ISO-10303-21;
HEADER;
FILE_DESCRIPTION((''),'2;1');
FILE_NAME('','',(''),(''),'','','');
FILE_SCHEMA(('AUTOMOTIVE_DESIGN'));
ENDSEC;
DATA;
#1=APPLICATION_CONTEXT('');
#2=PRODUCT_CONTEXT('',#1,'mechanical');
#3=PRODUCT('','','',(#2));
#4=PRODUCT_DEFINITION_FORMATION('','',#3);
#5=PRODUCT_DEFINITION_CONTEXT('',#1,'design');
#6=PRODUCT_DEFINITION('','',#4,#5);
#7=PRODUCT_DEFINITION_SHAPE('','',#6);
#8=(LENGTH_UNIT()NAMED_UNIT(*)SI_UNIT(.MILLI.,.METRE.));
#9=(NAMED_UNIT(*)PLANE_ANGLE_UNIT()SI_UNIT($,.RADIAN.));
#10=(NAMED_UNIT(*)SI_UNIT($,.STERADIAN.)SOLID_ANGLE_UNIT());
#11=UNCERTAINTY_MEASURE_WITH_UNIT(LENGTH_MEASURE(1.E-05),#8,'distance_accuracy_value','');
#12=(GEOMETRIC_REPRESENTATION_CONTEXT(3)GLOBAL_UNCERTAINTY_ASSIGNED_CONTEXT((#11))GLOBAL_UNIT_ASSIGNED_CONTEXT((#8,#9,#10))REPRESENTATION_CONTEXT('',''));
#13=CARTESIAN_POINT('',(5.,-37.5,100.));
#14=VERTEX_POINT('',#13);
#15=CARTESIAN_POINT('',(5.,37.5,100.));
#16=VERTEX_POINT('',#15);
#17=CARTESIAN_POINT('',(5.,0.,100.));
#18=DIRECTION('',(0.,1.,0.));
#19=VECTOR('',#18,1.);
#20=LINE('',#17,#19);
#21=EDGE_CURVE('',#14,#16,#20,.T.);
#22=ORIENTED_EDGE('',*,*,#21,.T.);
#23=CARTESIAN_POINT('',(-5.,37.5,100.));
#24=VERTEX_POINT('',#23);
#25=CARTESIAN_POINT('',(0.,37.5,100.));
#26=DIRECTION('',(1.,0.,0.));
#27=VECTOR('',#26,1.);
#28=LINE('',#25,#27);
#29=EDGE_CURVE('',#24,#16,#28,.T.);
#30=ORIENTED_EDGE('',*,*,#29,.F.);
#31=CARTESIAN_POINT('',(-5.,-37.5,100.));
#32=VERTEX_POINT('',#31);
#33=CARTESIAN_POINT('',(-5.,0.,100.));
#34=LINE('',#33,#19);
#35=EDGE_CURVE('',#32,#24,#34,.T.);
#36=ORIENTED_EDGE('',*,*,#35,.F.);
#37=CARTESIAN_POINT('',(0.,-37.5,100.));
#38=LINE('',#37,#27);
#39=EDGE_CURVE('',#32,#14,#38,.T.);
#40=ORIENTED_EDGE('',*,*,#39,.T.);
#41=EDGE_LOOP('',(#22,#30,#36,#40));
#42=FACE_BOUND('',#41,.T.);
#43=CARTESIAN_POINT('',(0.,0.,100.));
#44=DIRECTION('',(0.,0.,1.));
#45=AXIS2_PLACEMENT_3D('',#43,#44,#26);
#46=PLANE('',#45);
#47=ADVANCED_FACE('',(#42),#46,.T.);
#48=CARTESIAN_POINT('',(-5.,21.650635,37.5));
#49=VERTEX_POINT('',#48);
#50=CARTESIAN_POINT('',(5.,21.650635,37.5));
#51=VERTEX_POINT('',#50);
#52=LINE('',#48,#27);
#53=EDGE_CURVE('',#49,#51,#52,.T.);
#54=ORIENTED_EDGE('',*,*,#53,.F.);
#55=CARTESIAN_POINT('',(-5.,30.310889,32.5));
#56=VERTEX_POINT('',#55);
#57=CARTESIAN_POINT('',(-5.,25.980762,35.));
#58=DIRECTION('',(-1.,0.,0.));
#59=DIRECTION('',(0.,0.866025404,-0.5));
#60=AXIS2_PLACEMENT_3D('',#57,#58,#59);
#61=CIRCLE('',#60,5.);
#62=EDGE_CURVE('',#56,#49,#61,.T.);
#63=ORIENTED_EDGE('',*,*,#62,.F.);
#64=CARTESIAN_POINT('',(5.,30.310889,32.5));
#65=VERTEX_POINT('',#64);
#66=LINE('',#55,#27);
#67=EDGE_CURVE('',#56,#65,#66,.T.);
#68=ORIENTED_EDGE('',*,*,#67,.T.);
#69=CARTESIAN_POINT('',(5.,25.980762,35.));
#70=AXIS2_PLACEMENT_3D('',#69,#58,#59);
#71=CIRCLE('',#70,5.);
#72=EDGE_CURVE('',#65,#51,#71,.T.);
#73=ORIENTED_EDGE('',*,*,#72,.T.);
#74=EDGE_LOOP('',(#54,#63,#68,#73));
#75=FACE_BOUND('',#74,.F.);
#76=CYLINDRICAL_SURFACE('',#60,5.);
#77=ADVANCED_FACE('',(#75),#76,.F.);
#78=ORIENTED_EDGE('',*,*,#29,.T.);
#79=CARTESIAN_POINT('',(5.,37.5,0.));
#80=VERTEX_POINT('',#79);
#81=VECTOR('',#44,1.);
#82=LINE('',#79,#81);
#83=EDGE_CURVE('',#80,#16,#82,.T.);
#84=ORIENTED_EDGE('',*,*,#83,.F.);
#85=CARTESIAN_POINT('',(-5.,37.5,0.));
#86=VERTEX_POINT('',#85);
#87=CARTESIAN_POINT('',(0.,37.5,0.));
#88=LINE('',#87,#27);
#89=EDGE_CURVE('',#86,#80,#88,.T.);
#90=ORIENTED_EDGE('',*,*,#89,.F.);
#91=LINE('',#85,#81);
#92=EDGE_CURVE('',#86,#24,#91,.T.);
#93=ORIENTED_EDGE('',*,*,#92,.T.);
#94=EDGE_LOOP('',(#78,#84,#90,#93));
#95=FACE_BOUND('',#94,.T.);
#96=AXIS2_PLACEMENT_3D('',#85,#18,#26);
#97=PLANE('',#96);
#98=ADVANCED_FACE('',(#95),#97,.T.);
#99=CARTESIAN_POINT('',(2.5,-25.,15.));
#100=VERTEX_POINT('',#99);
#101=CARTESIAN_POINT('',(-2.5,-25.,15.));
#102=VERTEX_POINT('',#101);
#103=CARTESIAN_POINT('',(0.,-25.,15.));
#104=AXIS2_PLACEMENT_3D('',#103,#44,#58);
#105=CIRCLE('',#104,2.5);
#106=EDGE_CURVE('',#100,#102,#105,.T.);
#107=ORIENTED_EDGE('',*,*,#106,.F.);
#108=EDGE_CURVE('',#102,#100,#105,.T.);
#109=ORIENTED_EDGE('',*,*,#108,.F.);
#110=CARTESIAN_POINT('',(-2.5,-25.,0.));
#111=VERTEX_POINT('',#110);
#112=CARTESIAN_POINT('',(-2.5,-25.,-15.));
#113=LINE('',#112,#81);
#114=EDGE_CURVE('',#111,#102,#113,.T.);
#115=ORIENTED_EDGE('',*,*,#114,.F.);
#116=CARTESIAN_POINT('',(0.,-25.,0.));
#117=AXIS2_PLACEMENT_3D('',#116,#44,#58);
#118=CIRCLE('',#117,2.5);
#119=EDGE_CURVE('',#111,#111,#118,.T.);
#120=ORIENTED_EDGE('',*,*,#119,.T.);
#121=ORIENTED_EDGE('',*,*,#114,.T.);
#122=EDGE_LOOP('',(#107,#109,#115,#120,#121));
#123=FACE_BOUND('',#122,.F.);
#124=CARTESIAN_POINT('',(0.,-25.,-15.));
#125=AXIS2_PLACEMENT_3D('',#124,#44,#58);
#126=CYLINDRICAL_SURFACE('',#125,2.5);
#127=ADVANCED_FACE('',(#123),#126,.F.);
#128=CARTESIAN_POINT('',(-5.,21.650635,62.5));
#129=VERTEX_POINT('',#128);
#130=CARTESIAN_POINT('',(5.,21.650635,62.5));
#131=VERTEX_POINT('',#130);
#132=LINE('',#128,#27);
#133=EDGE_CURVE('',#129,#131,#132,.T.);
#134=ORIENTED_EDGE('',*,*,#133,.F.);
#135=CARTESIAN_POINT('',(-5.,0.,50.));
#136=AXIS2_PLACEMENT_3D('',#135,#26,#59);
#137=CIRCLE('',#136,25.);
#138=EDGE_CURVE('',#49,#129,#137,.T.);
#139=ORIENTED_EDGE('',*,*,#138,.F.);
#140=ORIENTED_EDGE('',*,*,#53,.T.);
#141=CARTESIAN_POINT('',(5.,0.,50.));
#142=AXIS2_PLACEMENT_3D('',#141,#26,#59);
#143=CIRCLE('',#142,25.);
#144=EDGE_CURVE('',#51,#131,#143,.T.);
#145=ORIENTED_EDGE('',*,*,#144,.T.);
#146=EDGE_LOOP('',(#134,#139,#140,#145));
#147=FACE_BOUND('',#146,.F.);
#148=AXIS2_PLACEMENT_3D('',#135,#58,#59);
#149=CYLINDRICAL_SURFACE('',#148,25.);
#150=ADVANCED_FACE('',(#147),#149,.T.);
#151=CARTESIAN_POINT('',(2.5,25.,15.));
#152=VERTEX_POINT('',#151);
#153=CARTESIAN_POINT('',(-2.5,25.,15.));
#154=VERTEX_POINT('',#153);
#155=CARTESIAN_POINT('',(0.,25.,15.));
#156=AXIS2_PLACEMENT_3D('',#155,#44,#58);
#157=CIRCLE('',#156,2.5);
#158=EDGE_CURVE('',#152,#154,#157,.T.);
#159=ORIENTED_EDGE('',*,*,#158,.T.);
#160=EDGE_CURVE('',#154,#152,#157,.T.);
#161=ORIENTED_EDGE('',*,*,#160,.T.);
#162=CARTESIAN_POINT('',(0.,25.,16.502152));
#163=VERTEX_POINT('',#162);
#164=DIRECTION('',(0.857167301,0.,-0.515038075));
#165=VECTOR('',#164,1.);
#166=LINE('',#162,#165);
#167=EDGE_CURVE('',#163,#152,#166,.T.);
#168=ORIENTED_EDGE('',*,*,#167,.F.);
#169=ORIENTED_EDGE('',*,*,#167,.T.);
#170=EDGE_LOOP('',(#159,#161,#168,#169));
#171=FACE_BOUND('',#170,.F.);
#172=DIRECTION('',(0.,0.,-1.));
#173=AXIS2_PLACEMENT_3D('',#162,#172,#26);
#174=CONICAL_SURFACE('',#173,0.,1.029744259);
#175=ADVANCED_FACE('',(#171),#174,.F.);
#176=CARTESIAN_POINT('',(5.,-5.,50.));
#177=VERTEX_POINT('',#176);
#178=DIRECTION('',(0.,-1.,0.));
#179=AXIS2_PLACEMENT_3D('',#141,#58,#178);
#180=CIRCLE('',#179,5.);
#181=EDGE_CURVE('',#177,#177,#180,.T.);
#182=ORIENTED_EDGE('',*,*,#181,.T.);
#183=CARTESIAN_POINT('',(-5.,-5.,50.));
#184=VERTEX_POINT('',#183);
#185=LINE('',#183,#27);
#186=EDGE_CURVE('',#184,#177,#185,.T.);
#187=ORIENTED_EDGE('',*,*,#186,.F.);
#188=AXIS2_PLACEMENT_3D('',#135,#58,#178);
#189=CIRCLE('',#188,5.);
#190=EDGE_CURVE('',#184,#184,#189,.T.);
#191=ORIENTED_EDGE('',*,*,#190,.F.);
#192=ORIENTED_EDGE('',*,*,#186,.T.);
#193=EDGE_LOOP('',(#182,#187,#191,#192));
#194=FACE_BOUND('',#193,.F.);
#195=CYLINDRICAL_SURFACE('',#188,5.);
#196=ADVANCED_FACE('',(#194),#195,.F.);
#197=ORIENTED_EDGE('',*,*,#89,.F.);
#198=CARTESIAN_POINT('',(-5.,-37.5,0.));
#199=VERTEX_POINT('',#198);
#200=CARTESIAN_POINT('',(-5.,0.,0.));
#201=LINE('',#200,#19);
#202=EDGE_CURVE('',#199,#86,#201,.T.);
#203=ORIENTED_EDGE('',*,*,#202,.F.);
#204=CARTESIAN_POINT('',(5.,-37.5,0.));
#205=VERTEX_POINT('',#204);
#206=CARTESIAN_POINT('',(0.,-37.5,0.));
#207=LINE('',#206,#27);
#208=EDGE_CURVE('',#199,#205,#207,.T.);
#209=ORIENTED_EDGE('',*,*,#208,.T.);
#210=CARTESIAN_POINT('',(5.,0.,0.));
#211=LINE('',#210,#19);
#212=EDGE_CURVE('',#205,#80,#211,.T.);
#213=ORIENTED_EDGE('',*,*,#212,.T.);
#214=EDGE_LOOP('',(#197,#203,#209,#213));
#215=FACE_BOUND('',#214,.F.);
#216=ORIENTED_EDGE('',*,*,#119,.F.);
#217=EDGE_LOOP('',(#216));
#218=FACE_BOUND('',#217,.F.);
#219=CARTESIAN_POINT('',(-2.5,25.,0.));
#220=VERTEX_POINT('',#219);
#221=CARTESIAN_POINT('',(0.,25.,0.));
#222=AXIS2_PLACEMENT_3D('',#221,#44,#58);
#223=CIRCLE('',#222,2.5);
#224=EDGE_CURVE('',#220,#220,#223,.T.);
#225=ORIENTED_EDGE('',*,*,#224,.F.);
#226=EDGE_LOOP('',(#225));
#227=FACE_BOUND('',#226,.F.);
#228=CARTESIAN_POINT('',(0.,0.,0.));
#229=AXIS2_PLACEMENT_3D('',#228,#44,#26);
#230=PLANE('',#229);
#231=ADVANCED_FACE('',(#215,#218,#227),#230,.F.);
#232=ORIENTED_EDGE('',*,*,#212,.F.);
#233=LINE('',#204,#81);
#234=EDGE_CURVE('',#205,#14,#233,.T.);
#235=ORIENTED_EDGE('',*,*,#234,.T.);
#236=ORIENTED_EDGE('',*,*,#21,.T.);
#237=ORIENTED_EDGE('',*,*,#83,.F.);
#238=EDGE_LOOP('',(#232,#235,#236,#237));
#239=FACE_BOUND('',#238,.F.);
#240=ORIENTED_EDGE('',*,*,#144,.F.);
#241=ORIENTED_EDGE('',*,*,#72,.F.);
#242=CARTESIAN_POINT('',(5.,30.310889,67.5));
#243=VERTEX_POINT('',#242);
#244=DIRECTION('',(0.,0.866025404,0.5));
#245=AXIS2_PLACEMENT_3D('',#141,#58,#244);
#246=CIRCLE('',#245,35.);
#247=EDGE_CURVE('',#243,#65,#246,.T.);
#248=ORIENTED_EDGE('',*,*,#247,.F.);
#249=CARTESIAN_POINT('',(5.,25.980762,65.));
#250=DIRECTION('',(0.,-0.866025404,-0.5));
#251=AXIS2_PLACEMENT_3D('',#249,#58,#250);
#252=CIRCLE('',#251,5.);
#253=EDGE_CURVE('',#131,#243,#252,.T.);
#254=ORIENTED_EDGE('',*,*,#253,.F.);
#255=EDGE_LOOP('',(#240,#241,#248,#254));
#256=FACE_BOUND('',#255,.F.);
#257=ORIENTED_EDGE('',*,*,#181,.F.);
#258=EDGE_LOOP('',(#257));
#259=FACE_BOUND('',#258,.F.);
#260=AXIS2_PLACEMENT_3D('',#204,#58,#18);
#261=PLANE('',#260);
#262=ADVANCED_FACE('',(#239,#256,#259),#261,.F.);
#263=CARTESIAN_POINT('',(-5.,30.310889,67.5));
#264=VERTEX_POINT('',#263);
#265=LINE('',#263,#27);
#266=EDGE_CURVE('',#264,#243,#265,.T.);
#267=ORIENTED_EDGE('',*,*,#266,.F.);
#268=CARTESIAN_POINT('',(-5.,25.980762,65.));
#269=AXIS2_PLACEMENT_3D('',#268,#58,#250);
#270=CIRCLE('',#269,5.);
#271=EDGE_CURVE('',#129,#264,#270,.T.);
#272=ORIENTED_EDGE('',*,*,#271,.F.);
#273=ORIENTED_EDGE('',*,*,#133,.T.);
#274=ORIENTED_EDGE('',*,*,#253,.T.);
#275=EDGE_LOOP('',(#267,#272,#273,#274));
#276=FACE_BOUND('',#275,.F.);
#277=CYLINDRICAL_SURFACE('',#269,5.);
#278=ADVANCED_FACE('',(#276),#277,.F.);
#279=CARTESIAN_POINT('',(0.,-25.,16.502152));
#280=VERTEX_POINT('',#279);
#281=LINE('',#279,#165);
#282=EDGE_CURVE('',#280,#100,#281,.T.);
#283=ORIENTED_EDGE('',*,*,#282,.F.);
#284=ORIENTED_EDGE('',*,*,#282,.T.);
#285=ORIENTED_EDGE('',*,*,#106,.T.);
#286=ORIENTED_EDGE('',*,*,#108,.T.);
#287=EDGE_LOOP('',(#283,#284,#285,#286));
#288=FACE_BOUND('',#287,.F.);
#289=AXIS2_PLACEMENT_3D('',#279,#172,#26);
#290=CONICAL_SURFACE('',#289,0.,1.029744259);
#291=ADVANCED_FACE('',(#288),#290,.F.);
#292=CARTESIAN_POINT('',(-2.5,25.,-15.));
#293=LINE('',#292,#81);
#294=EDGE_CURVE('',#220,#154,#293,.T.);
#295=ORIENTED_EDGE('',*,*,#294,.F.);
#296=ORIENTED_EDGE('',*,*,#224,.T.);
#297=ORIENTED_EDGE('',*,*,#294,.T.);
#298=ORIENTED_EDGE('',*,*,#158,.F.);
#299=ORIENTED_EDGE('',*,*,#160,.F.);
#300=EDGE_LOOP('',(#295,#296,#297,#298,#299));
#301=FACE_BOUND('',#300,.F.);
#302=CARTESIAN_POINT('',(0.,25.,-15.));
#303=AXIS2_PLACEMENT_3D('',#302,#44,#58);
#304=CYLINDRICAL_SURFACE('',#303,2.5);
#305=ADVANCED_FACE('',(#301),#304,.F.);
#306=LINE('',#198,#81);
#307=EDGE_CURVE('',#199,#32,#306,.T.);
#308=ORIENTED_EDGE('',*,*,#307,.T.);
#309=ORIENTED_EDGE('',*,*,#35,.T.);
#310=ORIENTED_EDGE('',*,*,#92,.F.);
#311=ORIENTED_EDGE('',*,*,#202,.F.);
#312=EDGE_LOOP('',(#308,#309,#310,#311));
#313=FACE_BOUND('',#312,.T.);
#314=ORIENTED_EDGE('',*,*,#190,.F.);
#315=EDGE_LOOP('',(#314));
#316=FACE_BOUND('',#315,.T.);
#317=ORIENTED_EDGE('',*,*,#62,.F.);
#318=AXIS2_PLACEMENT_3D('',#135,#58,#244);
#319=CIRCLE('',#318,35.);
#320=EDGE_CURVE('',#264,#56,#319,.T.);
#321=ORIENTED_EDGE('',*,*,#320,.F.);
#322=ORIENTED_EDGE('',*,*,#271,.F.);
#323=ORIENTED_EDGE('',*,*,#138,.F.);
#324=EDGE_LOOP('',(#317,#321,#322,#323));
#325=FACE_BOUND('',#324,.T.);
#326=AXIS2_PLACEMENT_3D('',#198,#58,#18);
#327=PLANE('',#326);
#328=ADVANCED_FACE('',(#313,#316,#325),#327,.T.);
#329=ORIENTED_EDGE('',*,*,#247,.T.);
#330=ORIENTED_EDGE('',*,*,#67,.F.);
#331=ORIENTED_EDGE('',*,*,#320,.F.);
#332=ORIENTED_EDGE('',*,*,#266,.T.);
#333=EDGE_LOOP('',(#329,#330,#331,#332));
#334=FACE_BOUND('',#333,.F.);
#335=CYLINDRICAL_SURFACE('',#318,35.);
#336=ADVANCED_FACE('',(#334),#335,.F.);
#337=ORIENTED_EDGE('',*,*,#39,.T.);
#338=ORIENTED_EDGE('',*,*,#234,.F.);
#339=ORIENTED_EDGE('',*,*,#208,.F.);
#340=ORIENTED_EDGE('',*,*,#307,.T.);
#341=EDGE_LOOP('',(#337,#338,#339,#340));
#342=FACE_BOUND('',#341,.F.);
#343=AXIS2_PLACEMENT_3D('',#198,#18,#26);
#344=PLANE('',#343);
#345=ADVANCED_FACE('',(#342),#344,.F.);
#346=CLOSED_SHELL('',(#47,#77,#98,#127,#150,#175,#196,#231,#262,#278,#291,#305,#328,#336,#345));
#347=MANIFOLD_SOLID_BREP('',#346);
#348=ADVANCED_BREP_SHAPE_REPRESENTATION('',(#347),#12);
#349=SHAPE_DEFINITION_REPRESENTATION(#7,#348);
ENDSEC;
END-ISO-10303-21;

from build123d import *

# Parameters (mm, degrees)
F0_W     = 10
F0_H     = 75
F1_DEPTH = 100
F3_D     = 5
F3_DEPTH = 15
F3_TIP   = 1.5021515476
F4_R     = 5
F5_DEPTH = 10
F7_DEPTH = 10


with BuildPart() as f1:
    # F0 (on Top) → F1 (new body)
    with BuildSketch(Plane.XY):
        Rectangle(F0_W, F0_H)
    extrude(amount=F1_DEPTH)

    # F3
    with Locations(Plane(origin=(0, 0, 0), x_dir=(1, 0, 0), z_dir=(0, 0, -1))):
        with Locations((0, 25), (0, -25)):
            Hole(F3_D / 2, depth=F3_DEPTH)
            with Locations((0, 0, -(F3_DEPTH + F3_TIP / 2))):  # 118° drill point
                Cone(0, F3_D / 2, F3_TIP, mode=Mode.SUBTRACT)

    # F4 (on face) → F5 (cut, through all)
    with BuildSketch(Plane(origin=(-5, 0, 0), x_dir=(0, -1, 0), z_dir=(-1, 0, 0))):
        with Locations((0, 50)):
            Circle(F4_R)
    extrude(amount=-F5_DEPTH, mode=Mode.SUBTRACT)

    # F6 (on face) → F7 (cut, through all)
    with BuildSketch(Plane(origin=(-5, 0, 0), x_dir=(0, -1, 0), z_dir=(-1, 0, 0))):
        with BuildLine():
            ThreePointArc((-21.6506350946, 37.5), (-25, 50), (-21.6506350946, 62.5))
            ThreePointArc((-21.6506350946, 62.5), (-23.4807621135, 69.3301270189), (-30.3108891325, 67.5))
            ThreePointArc((-30.3108891325, 67.5), (-35, 50), (-30.3108891325, 32.5))
            ThreePointArc((-30.3108891325, 32.5), (-23.4807621135, 30.6698729811), (-21.6506350946, 37.5))
        make_face()
    extrude(amount=-F7_DEPTH, mode=Mode.SUBTRACT)


solid = f1.part
